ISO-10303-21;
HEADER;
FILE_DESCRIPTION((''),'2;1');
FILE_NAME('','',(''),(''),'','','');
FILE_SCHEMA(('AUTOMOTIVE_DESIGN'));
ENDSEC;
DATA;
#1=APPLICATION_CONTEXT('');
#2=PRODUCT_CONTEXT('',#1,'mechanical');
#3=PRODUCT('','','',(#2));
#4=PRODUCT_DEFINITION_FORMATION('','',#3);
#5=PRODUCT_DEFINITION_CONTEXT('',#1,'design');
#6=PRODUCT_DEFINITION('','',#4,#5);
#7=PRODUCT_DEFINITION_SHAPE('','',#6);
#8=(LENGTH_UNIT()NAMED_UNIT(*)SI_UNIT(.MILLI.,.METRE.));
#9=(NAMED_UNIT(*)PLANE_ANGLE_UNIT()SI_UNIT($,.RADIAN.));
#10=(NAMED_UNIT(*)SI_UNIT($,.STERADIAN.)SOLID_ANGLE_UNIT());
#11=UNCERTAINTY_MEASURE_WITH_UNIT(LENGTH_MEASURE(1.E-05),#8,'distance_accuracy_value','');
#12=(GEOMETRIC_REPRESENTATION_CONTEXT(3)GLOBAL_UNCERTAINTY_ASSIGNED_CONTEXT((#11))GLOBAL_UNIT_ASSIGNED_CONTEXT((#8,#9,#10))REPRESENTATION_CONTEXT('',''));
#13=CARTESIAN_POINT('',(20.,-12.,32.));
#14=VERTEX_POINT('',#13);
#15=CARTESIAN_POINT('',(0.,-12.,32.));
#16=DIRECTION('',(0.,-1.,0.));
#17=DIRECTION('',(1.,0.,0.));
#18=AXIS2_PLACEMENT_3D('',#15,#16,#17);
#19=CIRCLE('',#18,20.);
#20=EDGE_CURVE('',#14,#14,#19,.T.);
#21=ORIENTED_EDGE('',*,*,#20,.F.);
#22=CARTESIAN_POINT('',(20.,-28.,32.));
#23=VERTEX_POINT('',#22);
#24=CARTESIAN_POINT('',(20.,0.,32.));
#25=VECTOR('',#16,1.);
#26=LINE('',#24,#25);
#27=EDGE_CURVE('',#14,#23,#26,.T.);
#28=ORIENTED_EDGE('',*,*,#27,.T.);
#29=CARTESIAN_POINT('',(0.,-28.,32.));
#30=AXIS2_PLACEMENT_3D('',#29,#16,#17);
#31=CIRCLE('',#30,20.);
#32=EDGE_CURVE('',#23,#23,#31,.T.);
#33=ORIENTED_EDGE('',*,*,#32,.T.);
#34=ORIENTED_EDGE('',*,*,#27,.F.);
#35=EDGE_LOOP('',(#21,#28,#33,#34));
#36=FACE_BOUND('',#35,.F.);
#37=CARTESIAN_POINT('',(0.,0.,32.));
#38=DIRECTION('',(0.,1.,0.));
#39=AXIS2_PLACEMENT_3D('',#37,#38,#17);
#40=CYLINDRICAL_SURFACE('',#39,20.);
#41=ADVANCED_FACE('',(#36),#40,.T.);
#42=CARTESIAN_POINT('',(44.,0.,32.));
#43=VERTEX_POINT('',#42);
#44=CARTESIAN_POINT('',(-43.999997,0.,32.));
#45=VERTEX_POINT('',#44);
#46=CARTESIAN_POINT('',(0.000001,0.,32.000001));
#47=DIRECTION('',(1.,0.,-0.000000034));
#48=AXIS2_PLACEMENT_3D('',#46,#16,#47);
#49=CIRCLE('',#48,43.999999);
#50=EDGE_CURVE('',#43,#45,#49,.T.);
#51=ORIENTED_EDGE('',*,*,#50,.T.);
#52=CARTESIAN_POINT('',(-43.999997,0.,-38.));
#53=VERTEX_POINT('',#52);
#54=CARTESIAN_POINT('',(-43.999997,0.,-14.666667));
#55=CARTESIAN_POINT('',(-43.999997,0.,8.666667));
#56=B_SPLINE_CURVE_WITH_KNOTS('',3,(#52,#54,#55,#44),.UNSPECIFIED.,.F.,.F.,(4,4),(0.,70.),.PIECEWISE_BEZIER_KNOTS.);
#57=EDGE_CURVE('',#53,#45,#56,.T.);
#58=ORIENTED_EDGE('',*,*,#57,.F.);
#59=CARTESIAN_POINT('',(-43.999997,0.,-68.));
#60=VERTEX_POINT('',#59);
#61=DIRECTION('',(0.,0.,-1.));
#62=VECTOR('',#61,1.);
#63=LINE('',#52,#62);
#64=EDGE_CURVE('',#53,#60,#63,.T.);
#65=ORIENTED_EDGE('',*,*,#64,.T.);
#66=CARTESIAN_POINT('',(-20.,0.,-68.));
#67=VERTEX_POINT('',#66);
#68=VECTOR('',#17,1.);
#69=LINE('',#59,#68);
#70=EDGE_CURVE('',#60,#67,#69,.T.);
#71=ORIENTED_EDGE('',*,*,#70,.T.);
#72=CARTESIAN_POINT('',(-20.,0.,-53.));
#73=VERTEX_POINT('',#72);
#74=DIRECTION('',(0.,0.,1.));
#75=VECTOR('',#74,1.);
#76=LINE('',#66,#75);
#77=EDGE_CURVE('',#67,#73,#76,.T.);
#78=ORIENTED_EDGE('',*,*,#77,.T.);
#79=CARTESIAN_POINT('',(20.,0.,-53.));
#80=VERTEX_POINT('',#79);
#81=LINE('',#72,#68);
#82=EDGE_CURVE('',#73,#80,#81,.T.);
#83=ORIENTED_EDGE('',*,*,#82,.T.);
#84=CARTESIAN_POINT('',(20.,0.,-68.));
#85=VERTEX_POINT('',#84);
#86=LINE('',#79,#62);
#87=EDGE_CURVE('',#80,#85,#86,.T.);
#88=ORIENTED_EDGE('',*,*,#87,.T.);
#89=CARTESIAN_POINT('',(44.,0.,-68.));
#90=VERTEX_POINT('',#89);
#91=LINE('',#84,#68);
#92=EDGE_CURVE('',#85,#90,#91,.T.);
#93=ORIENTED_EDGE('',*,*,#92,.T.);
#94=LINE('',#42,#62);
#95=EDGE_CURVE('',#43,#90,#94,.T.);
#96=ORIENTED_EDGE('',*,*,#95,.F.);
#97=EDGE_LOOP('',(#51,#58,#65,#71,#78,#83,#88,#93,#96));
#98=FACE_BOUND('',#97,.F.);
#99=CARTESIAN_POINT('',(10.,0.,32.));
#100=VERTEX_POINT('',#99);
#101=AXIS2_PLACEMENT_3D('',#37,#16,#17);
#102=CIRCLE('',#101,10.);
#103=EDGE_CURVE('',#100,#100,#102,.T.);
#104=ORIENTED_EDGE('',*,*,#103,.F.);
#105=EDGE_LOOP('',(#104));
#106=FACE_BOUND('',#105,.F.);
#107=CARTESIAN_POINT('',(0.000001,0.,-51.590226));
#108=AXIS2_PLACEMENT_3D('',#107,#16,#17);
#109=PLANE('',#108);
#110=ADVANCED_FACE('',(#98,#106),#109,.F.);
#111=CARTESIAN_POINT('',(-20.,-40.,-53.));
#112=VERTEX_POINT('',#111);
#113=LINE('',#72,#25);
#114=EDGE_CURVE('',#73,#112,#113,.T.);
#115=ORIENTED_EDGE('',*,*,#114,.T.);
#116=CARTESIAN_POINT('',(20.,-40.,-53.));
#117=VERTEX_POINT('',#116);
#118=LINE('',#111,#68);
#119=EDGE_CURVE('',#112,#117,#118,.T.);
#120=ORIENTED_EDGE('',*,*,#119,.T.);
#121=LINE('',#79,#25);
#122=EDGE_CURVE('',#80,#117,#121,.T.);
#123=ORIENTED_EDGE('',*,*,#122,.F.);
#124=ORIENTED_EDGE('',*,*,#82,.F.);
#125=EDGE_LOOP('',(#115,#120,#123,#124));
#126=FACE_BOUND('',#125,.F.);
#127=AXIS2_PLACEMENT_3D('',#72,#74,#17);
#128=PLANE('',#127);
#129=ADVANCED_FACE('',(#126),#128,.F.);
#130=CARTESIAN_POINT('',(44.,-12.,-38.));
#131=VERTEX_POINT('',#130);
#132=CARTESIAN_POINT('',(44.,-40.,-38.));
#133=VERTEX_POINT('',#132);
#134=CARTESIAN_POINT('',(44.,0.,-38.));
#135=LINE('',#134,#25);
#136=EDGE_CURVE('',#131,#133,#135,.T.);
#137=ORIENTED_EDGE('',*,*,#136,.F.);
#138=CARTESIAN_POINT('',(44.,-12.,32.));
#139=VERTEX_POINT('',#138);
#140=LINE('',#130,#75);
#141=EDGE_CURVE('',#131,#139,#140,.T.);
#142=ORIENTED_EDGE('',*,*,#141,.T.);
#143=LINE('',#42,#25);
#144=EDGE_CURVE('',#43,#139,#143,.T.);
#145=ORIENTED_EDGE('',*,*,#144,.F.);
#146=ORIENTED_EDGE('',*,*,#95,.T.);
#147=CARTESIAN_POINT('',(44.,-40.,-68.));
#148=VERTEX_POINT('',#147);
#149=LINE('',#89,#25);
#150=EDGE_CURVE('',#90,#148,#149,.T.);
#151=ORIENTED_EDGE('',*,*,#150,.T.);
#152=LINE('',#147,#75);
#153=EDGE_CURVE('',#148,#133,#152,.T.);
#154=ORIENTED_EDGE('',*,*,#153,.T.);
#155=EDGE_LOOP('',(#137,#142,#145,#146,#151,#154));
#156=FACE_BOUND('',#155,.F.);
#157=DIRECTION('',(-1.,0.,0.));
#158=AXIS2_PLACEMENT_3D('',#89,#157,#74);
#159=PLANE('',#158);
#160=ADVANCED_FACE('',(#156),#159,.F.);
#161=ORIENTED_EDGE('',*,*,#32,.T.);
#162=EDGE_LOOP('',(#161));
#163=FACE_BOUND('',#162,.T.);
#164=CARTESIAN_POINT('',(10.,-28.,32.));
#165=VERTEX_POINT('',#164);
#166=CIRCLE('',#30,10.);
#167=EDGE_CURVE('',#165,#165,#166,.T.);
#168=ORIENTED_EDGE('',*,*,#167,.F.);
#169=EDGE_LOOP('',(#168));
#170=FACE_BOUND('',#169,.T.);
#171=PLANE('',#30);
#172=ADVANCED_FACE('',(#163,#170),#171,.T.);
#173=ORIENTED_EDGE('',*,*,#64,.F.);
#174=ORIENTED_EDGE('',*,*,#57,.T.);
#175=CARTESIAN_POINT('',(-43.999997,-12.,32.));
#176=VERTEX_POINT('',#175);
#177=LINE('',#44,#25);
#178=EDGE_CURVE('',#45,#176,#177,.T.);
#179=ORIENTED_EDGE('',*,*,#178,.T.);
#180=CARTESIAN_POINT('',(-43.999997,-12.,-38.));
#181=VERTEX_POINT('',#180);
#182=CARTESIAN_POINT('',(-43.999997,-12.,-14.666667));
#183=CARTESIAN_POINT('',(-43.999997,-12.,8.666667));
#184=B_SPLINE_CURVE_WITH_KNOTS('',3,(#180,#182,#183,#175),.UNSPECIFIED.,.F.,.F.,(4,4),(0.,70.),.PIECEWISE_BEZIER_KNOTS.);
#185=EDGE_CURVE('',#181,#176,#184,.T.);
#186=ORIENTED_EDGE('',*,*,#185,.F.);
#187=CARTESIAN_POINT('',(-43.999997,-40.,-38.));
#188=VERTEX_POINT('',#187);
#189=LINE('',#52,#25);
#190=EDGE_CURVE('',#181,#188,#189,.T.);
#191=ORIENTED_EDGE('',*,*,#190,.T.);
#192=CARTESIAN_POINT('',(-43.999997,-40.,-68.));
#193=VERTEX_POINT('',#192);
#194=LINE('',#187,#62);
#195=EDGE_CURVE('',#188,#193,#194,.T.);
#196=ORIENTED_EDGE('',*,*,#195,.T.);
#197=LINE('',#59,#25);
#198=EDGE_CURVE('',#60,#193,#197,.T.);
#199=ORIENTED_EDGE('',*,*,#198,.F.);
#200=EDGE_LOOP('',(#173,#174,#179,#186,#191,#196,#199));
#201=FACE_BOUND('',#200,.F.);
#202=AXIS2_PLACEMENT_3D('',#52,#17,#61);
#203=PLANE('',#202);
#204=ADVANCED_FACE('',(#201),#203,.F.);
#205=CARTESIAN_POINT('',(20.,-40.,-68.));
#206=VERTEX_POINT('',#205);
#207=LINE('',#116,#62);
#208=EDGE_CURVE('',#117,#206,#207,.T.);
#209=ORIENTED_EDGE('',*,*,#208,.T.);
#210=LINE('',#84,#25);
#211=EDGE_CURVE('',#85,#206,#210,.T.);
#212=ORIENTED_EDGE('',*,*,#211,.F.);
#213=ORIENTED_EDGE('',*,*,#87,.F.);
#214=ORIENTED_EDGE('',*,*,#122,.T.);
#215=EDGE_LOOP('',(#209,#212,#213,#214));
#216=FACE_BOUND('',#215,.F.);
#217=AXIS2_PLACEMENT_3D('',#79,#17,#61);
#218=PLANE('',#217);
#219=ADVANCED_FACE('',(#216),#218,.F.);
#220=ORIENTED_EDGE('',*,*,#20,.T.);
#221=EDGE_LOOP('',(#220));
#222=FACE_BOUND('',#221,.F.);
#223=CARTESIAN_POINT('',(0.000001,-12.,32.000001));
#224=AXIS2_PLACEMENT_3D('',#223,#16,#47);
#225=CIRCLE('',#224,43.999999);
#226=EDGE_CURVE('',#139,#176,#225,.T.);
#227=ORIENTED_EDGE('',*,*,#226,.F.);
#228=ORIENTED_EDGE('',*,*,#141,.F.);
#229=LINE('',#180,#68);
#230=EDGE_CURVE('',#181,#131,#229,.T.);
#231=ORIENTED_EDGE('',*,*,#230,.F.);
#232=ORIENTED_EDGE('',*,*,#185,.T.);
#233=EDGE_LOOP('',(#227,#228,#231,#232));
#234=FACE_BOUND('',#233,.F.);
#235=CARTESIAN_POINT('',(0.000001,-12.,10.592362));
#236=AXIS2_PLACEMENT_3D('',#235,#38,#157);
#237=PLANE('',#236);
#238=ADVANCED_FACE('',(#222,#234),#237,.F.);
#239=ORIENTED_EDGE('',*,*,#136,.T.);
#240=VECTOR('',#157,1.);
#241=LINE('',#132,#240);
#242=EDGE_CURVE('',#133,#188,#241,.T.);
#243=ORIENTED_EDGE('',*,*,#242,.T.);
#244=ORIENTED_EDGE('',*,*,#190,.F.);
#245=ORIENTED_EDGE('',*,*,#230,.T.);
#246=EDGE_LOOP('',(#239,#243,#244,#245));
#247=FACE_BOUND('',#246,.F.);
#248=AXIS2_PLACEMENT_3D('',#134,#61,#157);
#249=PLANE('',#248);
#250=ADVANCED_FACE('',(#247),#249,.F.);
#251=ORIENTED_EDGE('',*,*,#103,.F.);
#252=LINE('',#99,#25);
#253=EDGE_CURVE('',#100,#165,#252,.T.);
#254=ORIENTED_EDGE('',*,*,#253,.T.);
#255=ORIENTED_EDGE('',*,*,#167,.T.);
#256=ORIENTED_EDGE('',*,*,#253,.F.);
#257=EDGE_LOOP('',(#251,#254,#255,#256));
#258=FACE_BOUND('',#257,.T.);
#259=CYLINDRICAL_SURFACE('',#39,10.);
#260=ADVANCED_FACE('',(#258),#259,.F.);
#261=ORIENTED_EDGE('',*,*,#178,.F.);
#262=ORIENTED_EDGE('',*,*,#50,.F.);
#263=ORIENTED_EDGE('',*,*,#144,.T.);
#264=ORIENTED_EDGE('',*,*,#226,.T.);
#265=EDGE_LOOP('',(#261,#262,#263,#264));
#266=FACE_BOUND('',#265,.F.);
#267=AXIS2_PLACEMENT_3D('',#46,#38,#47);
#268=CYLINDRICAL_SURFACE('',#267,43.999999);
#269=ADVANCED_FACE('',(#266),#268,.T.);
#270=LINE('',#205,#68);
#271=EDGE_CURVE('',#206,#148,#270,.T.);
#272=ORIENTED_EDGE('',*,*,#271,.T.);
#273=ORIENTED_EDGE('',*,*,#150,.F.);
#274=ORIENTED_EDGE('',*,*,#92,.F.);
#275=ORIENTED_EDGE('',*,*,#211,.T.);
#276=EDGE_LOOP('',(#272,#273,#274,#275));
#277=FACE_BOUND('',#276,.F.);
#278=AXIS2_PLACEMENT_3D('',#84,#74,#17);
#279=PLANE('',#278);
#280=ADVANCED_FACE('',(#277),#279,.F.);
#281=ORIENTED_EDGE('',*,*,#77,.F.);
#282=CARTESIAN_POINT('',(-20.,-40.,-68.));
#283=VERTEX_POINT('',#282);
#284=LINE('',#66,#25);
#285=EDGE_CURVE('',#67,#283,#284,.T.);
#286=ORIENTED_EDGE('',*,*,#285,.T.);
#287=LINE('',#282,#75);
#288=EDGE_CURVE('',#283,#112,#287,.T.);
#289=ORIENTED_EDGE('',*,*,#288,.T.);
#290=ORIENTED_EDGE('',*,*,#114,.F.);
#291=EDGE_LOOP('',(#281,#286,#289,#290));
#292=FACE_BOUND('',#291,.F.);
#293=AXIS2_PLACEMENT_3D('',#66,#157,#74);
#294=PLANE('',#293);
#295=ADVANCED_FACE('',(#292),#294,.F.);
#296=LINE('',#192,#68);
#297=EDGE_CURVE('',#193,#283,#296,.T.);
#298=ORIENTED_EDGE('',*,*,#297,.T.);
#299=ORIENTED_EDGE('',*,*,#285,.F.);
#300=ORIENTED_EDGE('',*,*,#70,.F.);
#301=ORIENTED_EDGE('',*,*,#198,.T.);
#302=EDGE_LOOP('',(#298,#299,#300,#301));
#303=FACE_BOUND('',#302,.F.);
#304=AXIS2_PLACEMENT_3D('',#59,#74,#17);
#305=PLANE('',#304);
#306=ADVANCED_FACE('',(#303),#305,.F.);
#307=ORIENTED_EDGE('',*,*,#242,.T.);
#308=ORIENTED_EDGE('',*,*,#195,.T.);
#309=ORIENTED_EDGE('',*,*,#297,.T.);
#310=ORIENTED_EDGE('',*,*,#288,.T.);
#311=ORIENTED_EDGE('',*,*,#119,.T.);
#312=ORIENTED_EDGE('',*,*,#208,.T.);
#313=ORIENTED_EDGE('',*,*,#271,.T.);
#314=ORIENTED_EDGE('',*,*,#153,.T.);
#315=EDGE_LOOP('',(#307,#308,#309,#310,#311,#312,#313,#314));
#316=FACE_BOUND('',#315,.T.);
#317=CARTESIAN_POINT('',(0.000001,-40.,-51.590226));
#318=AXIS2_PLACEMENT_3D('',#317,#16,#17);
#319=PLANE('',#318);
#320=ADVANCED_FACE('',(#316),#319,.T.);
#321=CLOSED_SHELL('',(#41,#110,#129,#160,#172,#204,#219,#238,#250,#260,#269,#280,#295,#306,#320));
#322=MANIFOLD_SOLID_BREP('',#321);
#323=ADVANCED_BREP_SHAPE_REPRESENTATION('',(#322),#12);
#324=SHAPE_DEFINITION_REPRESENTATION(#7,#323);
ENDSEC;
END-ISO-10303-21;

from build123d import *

# Parameters (mm, degrees)
F0_R     = 20
F0_R_2   = 10
F1_DEPTH = 28
F2_DEPTH = 12
F3_DEPTH = 40


# Not quite as in the source:
# - ends of sketch curves that miss each other by under 0.0002 mm in the source are joined


with BuildPart() as f1:
    # F0 (on Front) → F1 (new body)
    with BuildSketch(Plane.XZ):
        with Locations((0, 32)):
            Circle(F0_R)
        with Locations((0, 32)):
            Circle(F0_R_2, mode=Mode.SUBTRACT)
    extrude(amount=F1_DEPTH)

    # F0 (on Front) → F2 (join)
    with BuildSketch(Plane.XZ):
        with BuildLine():
            add(Edge.make_bspline(
                [(-43.9999970173, -38), (-43.9999970173, -14.6666666667), (-43.9999970173, 8.6666666667), (-43.9999970173, 32)],
                knots=[0, 0, 0, 0, 70, 70, 70, 70], degree=3))
            Line((-43.9999970173, -38), (44, -38))
            Line((44, -38), (44, 32))
            ThreePointArc((44, 32), (0, 76), (-43.9999970173, 32))
        make_face()
        with Locations((0, 32)):
            Circle(F0_R, mode=Mode.SUBTRACT)
    extrude(amount=F2_DEPTH)

    # F0 (on Front) → F3 (join)
    with BuildSketch(Plane.XZ):
        Polygon((-43.9999970173, -38), (-43.9999970173, -68), (-20, -68), (-20, -53), (20, -53), (20, -68), (44, -68), (44, -38), align=None)
    extrude(amount=F3_DEPTH)


solid = f1.part
